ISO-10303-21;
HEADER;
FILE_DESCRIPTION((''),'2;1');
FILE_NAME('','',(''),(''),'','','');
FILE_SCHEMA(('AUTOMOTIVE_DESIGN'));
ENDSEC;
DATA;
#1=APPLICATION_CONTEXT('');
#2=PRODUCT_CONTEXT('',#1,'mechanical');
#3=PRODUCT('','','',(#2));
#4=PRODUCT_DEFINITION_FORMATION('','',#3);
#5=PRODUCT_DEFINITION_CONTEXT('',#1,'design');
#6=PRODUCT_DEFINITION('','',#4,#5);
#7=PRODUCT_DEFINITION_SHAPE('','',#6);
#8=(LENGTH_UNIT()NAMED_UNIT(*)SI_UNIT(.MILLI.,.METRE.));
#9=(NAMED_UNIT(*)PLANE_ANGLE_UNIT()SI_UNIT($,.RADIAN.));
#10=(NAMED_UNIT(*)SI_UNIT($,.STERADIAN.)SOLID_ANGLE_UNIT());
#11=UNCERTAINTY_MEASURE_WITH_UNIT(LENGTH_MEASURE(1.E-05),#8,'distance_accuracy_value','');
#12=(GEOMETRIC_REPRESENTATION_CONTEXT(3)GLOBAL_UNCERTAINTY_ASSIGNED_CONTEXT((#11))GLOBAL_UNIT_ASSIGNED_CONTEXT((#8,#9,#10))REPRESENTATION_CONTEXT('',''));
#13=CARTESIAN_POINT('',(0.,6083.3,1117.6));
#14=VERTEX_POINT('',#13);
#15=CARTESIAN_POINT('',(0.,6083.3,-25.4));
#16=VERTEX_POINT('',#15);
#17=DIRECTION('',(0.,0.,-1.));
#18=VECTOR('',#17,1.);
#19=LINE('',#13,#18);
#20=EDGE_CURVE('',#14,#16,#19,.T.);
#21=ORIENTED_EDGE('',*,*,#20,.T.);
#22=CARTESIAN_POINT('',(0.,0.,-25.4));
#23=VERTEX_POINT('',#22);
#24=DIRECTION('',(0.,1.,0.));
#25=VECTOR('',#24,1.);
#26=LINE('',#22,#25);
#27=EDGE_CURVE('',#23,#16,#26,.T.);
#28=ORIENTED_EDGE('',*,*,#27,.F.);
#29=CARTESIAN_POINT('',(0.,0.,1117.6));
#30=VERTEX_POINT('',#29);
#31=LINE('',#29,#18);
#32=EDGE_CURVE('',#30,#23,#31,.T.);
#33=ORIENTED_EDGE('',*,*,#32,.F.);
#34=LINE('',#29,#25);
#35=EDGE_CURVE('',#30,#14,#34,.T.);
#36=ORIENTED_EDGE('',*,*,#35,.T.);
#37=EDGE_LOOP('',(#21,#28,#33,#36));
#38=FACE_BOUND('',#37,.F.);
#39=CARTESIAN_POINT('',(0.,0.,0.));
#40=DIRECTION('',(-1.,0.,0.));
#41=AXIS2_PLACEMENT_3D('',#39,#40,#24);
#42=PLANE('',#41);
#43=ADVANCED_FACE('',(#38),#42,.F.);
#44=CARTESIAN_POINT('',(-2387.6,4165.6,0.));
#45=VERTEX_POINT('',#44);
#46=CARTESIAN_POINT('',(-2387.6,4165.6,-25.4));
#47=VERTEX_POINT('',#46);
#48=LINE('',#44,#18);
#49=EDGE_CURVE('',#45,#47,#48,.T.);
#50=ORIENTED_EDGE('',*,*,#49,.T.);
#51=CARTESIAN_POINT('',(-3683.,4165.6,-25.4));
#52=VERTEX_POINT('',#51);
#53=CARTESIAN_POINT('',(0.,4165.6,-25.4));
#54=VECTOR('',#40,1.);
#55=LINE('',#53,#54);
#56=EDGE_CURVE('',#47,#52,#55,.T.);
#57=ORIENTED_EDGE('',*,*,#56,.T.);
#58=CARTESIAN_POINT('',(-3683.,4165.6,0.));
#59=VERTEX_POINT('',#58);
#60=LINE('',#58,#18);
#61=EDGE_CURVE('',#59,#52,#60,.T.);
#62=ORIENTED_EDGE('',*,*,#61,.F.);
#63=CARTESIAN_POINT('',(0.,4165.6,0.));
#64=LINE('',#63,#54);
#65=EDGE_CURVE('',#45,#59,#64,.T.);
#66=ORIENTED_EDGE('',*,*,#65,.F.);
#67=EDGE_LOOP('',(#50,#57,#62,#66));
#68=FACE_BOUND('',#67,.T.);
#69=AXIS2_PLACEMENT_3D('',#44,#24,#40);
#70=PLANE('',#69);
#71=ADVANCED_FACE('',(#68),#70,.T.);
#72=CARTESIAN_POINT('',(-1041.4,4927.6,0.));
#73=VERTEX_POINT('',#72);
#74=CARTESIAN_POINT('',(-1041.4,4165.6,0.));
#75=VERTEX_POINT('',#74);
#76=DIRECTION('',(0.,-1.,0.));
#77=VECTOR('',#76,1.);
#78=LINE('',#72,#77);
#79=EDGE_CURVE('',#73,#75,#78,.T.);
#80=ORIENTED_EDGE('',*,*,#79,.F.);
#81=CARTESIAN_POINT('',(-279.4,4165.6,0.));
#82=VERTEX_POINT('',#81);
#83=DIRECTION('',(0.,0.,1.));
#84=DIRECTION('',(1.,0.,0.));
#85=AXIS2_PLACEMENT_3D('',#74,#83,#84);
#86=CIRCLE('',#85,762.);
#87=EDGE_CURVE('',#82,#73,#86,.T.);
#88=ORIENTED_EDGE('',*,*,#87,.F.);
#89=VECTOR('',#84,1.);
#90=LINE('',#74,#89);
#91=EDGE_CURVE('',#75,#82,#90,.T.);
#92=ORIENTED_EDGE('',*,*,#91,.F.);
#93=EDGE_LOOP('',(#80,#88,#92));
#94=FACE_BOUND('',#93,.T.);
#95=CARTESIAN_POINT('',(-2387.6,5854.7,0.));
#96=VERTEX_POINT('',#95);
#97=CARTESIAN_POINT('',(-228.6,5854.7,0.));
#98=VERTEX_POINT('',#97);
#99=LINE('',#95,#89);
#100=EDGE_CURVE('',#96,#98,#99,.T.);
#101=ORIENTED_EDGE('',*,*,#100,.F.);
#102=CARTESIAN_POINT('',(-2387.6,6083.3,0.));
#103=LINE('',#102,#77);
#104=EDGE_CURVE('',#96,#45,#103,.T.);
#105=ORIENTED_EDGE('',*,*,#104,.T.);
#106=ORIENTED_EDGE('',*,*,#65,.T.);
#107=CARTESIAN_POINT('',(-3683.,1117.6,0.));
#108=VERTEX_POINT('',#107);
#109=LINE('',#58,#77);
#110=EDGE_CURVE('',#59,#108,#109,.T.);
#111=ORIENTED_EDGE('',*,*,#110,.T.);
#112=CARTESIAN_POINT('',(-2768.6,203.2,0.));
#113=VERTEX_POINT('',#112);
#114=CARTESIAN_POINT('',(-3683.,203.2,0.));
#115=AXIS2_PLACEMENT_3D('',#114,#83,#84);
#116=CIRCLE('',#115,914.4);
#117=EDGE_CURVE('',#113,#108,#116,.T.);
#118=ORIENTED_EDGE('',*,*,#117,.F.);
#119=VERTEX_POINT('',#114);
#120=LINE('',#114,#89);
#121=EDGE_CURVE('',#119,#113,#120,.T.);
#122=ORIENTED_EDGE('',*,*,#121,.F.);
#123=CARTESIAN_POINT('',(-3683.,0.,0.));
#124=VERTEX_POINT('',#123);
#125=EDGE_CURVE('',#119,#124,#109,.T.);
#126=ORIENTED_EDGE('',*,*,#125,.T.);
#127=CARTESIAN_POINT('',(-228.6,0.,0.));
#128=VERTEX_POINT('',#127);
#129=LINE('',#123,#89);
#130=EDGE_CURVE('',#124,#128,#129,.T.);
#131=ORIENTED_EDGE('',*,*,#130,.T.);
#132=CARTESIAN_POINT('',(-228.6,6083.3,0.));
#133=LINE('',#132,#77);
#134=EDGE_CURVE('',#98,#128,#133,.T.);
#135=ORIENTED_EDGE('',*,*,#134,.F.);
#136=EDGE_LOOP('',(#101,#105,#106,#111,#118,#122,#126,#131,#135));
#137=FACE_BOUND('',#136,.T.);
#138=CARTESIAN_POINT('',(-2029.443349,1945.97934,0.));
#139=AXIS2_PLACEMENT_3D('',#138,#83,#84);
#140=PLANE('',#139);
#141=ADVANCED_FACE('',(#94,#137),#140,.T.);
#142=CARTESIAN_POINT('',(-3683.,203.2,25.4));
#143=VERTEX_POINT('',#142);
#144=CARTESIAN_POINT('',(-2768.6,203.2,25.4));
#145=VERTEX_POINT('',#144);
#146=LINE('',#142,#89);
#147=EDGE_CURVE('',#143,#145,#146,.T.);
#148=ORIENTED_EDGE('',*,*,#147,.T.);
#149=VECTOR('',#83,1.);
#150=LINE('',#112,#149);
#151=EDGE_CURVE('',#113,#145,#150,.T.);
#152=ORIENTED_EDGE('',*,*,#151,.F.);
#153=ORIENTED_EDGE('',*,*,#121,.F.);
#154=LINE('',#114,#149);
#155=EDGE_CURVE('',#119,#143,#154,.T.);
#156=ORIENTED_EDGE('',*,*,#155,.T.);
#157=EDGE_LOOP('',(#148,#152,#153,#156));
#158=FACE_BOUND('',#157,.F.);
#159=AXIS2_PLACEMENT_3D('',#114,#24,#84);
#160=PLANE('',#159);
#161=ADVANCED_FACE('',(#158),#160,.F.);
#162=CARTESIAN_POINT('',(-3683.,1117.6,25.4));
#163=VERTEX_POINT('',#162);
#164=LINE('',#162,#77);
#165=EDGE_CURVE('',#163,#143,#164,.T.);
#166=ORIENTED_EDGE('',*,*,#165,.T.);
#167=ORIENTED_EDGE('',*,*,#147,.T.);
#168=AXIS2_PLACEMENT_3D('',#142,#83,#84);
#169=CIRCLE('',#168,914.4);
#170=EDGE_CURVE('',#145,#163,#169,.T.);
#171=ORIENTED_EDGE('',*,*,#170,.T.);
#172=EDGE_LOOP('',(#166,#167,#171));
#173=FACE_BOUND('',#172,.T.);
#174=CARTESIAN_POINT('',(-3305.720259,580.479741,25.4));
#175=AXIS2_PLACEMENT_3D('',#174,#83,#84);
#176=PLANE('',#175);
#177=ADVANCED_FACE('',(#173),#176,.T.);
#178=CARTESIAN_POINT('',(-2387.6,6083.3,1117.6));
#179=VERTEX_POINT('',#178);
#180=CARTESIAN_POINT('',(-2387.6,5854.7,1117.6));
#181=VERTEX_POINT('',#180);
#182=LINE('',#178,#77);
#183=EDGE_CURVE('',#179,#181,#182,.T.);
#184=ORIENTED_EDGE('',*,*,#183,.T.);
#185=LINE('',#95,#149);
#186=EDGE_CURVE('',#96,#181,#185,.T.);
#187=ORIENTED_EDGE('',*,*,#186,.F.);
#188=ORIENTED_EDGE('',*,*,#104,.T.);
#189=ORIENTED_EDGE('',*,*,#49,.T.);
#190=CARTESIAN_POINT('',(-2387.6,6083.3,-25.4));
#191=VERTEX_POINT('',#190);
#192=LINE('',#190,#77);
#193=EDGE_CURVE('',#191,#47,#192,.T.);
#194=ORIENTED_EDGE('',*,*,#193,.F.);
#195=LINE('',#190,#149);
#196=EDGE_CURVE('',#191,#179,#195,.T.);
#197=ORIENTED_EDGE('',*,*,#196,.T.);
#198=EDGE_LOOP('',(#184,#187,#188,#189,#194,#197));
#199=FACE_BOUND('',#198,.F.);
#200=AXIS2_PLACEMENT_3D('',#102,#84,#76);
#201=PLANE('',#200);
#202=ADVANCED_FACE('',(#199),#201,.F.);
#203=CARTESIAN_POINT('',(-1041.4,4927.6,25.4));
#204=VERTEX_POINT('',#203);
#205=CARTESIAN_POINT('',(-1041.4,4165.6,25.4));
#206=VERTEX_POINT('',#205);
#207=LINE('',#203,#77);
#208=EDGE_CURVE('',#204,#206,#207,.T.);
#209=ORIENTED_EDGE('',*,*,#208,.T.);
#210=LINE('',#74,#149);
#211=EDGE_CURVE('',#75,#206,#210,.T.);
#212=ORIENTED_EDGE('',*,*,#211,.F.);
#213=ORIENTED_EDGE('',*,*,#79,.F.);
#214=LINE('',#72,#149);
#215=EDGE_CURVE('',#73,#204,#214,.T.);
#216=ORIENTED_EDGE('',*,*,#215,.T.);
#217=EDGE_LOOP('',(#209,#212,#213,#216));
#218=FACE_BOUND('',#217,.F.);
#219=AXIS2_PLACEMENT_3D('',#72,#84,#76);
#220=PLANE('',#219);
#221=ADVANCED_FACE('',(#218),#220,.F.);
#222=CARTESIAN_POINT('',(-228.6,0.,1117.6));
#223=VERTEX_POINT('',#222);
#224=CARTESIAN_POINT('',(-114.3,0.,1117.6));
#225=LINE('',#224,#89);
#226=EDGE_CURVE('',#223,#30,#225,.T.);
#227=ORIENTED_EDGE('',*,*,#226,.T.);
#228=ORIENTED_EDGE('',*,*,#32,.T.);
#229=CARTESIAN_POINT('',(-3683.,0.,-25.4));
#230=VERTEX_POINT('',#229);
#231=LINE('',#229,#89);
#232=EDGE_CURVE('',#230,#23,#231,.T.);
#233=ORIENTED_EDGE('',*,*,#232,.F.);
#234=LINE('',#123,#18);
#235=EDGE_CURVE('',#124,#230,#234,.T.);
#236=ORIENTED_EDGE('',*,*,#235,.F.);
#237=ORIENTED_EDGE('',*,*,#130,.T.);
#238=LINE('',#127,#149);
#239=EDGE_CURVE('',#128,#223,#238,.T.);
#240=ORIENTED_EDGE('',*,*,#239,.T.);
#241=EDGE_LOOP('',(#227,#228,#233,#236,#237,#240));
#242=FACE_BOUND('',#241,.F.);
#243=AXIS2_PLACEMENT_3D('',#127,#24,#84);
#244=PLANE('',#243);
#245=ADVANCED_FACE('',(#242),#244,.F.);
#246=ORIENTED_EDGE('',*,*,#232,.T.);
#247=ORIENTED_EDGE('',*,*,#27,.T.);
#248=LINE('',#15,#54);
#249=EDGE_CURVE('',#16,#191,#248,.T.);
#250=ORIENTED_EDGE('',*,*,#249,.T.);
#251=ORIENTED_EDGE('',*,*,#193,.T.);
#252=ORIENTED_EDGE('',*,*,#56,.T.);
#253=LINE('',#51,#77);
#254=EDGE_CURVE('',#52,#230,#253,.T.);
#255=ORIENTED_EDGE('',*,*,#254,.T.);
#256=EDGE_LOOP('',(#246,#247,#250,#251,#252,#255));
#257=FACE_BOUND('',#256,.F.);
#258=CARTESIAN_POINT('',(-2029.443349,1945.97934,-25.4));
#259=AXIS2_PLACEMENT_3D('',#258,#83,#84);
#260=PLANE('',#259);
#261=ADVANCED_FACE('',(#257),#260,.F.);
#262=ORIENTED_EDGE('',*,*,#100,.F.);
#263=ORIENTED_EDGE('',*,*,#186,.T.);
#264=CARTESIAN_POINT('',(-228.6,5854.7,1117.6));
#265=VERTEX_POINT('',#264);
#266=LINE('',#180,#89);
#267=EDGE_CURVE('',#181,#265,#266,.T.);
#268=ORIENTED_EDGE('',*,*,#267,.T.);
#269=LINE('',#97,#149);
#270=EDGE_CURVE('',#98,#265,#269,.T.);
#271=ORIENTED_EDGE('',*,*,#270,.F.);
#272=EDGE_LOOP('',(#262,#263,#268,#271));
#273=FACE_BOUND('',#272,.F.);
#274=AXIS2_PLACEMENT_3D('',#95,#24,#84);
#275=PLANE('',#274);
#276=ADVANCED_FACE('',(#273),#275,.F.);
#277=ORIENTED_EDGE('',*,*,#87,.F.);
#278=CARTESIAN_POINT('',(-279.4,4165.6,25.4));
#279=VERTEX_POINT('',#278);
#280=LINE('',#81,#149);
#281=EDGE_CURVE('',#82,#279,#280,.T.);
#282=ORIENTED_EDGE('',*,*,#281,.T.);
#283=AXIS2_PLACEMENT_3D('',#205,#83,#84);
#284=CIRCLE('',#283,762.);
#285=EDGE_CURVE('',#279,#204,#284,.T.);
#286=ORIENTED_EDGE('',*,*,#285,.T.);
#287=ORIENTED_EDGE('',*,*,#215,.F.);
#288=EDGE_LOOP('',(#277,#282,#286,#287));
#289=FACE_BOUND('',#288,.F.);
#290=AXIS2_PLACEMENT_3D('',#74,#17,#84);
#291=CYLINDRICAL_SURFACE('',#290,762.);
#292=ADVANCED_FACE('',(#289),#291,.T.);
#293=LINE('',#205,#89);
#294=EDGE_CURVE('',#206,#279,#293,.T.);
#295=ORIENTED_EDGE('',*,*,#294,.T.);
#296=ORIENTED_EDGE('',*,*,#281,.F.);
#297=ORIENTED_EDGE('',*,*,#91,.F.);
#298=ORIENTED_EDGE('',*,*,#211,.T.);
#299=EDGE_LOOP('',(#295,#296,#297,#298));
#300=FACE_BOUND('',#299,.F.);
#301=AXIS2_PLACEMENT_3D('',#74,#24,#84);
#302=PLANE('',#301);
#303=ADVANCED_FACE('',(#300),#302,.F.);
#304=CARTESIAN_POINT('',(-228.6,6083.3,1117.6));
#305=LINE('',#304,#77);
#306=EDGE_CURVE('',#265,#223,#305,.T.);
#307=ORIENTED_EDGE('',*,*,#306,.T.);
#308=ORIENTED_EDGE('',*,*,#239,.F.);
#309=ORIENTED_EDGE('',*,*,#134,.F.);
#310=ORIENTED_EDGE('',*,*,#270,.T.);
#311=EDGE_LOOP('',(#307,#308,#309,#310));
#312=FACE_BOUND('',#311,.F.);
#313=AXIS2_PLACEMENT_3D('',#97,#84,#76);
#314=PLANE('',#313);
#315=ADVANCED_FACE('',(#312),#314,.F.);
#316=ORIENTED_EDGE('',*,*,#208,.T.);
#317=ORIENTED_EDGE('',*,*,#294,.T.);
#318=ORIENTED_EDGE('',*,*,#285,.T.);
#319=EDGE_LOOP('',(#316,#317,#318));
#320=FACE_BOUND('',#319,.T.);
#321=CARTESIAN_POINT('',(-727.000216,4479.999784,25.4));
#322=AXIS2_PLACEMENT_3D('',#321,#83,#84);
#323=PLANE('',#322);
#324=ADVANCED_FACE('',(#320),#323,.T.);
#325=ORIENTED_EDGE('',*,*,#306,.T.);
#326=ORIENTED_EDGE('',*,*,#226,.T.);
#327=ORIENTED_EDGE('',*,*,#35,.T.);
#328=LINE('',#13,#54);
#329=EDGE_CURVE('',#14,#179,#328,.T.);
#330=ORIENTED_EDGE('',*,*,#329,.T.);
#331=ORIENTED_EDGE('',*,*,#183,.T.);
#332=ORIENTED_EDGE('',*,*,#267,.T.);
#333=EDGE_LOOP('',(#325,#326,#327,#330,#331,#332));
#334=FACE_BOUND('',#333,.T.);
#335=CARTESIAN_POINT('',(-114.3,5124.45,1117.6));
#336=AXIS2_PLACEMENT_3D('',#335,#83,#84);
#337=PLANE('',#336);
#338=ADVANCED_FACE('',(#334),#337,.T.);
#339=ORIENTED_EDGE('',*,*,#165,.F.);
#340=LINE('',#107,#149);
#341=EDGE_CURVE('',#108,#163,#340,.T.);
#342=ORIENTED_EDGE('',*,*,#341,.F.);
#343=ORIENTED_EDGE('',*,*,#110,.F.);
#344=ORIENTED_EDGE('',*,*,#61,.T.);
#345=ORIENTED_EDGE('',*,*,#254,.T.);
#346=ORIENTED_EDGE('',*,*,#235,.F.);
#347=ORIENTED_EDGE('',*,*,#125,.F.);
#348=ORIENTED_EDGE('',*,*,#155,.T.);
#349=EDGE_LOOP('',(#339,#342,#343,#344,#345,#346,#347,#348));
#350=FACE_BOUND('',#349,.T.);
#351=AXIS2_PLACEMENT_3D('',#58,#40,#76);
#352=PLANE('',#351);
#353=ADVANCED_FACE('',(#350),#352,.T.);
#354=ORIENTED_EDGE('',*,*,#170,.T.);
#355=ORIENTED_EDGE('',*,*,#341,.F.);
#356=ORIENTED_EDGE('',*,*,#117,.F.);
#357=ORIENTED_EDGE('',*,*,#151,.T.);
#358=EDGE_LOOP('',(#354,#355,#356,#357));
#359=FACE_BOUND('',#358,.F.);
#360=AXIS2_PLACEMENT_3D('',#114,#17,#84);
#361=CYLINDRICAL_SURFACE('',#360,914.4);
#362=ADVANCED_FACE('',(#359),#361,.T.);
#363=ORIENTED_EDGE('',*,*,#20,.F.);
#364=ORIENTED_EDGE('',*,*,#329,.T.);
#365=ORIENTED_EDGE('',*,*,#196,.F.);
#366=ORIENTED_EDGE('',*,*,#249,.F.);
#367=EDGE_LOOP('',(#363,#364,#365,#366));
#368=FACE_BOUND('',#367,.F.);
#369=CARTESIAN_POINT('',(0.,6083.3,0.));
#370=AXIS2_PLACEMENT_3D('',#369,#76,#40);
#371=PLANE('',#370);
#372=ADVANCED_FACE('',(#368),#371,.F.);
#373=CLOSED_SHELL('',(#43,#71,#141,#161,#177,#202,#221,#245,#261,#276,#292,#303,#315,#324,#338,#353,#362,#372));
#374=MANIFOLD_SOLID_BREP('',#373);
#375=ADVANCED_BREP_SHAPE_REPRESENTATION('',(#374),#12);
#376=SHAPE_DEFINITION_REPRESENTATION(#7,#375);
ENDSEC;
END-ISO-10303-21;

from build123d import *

# Parameters (mm, degrees)
F0_W     = 228.6
F0_H     = 4165.6
F0_W_2   = 279.4
F0_H_2   = 1689.1
F1_DEPTH = 25.4
F2_DEPTH = 25.4
F3_DEPTH = 1117.6


# Not quite as in the source:
# - the program builds the solid bodies; features that only make, move or delete a surface that nothing else refers to are left out


with BuildPart() as f1:
    # F0 (on Top) → F1 (new body)
    with BuildSketch(Plane.XY):
        with BuildLine():
            Line((-3683, 0), (-228.6, 0))
            Line((-228.6, 0), (-228.6, 4165.6))
            Line((-228.6, 4165.6), (-279.4, 4165.6))
            Line((-279.4, 4165.6), (-1041.4, 4165.6))
            Line((-1041.4, 4165.6), (-2108.2, 4165.6))
            Line((-2108.2, 4165.6), (-2387.6, 4165.6))
            Line((-2387.6, 4165.6), (-3683, 4165.6))
            Line((-3683, 4165.6), (-3683, 1117.6))
            ThreePointArc((-3683, 1117.6), (-3036.421559283, 849.778440717), (-2768.6, 203.2))
            Line((-2768.6, 203.2), (-3683, 203.2))
            Line((-3683, 203.2), (-3683, 0))
        make_face()
        with BuildLine():
            Line((-3683, 1117.6), (-3683, 203.2))
            Line((-3683, 203.2), (-2768.6, 203.2))
            ThreePointArc((-2768.6, 203.2), (-3036.421559283, 849.778440717), (-3683, 1117.6))
        make_face()
        with Locations((-114.3, 2082.8)):
            Rectangle(F0_W, F0_H)
        Polygon((-228.6, 4165.6), (0, 4165.6), (0, 6083.3), (-228.6, 6083.3), (-228.6, 5854.7), align=None)
        with BuildLine():
            Line((-279.4, 4165.6), (-228.6, 4165.6))
            Line((-228.6, 4165.6), (-228.6, 5854.7))
            Line((-228.6, 5854.7), (-2108.2, 5854.7))
            Line((-2108.2, 5854.7), (-2108.2, 4165.6))
            Line((-2108.2, 4165.6), (-1041.4, 4165.6))
            Line((-1041.4, 4165.6), (-1041.4, 4927.6))
            ThreePointArc((-1041.4, 4927.6), (-502.5846327359, 4704.4153672641), (-279.4, 4165.6))
        make_face()
        with BuildLine():
            Line((-1041.4, 4165.6), (-279.4, 4165.6))
            ThreePointArc((-279.4, 4165.6), (-502.5846327359, 4704.4153672641), (-1041.4, 4927.6))
            Line((-1041.4, 4927.6), (-1041.4, 4165.6))
        make_face()
        Polygon((-2108.2, 5854.7), (-228.6, 5854.7), (-228.6, 6083.3), (-2387.6, 6083.3), (-2387.6, 5854.7), align=None)
        with Locations((-2247.9, 5010.15)):
            Rectangle(F0_W_2, F0_H_2)
    extrude(amount=-F1_DEPTH)

    # F0 (on Top) → F2 (join)
    with BuildSketch(Plane.XY):
        with BuildLine():
            Line((-3683, 1117.6), (-3683, 203.2))
            Line((-3683, 203.2), (-2768.6, 203.2))
            ThreePointArc((-2768.6, 203.2), (-3036.421559283, 849.778440717), (-3683, 1117.6))
        make_face()
        with BuildLine():
            Line((-1041.4, 4165.6), (-279.4, 4165.6))
            ThreePointArc((-279.4, 4165.6), (-502.5846327359, 4704.4153672641), (-1041.4, 4927.6))
            Line((-1041.4, 4927.6), (-1041.4, 4165.6))
        make_face()
    extrude(amount=F2_DEPTH)

    # F0 (on Top) → F3 (join)
    with BuildSketch(Plane.XY):
        Polygon((-228.6, 4165.6), (0, 4165.6), (0, 6083.3), (-228.6, 6083.3), (-228.6, 5854.7), align=None)
        with Locations((-114.3, 2082.8)):
            Rectangle(F0_W, F0_H)
        Polygon((-2108.2, 5854.7), (-228.6, 5854.7), (-228.6, 6083.3), (-2387.6, 6083.3), (-2387.6, 5854.7), align=None)
    extrude(amount=F3_DEPTH)


solid = f1.part
